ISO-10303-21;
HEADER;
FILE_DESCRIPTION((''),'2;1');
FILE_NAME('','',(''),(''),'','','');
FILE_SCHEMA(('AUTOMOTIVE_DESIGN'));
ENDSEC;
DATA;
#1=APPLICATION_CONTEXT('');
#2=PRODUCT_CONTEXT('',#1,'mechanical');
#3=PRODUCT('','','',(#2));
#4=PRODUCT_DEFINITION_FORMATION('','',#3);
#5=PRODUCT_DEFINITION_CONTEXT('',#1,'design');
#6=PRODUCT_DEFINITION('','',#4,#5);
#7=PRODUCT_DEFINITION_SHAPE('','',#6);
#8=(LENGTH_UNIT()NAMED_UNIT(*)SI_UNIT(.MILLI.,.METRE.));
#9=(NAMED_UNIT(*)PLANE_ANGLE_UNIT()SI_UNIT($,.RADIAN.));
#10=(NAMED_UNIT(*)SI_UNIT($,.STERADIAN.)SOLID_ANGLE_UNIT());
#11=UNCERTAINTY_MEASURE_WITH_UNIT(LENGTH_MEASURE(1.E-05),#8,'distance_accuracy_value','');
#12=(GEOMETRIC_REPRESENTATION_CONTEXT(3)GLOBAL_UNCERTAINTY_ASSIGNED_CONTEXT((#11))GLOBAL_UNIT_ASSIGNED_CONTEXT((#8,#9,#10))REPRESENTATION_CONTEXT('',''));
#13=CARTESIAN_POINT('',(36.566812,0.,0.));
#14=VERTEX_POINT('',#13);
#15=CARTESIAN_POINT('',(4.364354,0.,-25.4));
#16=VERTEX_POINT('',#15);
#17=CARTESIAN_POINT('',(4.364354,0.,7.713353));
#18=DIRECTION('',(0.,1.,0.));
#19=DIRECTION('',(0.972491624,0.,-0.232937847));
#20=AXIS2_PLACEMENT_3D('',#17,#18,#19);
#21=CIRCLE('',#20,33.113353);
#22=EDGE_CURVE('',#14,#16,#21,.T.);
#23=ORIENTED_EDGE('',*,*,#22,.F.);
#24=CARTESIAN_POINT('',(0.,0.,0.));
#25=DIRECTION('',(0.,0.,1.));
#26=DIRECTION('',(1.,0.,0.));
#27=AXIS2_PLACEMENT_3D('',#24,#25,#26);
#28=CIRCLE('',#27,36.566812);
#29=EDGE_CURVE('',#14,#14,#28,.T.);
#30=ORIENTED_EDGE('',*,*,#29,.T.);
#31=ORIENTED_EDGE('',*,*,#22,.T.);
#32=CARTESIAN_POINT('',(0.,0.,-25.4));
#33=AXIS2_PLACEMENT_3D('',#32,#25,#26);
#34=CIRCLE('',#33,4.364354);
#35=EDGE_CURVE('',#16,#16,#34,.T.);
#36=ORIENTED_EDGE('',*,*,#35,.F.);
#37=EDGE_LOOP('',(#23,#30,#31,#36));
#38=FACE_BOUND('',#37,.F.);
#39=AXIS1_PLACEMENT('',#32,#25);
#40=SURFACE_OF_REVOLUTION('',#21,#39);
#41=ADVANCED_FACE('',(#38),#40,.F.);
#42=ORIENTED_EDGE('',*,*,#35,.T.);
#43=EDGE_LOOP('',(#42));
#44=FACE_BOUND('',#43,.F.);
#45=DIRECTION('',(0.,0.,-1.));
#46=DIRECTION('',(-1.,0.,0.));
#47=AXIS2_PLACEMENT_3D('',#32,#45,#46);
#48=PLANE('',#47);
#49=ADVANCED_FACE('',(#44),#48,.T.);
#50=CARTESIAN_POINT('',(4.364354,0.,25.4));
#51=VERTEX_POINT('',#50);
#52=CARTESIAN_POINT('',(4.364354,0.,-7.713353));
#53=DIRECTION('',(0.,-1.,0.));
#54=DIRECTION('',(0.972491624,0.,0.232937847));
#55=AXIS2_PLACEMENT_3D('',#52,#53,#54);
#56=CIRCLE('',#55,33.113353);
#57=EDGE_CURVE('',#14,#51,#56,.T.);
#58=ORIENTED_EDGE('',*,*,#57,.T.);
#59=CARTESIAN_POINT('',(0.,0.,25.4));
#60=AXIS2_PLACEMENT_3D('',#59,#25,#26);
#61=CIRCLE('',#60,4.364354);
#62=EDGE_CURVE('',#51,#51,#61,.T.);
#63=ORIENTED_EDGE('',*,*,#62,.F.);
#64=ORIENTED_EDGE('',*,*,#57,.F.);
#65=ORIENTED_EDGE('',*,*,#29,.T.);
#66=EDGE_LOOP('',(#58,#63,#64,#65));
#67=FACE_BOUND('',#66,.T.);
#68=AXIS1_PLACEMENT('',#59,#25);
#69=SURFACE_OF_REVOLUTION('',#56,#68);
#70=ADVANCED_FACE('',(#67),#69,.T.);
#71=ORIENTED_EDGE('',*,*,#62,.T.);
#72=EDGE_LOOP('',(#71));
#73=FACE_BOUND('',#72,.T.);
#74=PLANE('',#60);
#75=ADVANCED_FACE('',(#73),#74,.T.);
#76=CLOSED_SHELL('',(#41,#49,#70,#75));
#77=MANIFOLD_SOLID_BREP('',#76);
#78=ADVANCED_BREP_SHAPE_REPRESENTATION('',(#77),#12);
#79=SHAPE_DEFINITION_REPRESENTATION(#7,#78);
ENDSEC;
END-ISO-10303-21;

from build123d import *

# Parameters (mm, degrees)
F0_R     = 36.5668122635
F1_DEPTH = 25.4


# Not quite as in the source:
# - a fillet or chamfer that OpenCascade refuses, or shapes differently, is made with other operations: its cross-section is extruded or revolved along the edge and cut away or added


with BuildPart() as f1:
    # F0 (on Top) → F1 (new body)
    with BuildSketch(Plane.XY):
        Circle(F0_R)
    extrude(amount=F1_DEPTH)

    # F2: fillet of radius 33.1133532215 on 1 edges, made by hand

    # F2_s1 → F2_t2 (revolve, cut)
    with BuildSketch(Plane.XZ):
        with BuildLine():
            ThreePointArc((36.5668122635, 0), (24.8714154597, 18.2857732188), (4.364353605, 25.4))
            Line((4.364353605, 25.4), (36.5668122635, 25.4))
            Line((36.5668122635, 25.4), (36.5668122635, 0))
        make_face()
    revolve(axis=Axis((0, 0, 25.4), (0, 0, 1)), mode=Mode.SUBTRACT)

    # F3: F1 across plane


with BuildPart() as f1_1:
    add(f1.part)
    add(f1.part.mirror(Plane.XY))


solid = f1_1.part
